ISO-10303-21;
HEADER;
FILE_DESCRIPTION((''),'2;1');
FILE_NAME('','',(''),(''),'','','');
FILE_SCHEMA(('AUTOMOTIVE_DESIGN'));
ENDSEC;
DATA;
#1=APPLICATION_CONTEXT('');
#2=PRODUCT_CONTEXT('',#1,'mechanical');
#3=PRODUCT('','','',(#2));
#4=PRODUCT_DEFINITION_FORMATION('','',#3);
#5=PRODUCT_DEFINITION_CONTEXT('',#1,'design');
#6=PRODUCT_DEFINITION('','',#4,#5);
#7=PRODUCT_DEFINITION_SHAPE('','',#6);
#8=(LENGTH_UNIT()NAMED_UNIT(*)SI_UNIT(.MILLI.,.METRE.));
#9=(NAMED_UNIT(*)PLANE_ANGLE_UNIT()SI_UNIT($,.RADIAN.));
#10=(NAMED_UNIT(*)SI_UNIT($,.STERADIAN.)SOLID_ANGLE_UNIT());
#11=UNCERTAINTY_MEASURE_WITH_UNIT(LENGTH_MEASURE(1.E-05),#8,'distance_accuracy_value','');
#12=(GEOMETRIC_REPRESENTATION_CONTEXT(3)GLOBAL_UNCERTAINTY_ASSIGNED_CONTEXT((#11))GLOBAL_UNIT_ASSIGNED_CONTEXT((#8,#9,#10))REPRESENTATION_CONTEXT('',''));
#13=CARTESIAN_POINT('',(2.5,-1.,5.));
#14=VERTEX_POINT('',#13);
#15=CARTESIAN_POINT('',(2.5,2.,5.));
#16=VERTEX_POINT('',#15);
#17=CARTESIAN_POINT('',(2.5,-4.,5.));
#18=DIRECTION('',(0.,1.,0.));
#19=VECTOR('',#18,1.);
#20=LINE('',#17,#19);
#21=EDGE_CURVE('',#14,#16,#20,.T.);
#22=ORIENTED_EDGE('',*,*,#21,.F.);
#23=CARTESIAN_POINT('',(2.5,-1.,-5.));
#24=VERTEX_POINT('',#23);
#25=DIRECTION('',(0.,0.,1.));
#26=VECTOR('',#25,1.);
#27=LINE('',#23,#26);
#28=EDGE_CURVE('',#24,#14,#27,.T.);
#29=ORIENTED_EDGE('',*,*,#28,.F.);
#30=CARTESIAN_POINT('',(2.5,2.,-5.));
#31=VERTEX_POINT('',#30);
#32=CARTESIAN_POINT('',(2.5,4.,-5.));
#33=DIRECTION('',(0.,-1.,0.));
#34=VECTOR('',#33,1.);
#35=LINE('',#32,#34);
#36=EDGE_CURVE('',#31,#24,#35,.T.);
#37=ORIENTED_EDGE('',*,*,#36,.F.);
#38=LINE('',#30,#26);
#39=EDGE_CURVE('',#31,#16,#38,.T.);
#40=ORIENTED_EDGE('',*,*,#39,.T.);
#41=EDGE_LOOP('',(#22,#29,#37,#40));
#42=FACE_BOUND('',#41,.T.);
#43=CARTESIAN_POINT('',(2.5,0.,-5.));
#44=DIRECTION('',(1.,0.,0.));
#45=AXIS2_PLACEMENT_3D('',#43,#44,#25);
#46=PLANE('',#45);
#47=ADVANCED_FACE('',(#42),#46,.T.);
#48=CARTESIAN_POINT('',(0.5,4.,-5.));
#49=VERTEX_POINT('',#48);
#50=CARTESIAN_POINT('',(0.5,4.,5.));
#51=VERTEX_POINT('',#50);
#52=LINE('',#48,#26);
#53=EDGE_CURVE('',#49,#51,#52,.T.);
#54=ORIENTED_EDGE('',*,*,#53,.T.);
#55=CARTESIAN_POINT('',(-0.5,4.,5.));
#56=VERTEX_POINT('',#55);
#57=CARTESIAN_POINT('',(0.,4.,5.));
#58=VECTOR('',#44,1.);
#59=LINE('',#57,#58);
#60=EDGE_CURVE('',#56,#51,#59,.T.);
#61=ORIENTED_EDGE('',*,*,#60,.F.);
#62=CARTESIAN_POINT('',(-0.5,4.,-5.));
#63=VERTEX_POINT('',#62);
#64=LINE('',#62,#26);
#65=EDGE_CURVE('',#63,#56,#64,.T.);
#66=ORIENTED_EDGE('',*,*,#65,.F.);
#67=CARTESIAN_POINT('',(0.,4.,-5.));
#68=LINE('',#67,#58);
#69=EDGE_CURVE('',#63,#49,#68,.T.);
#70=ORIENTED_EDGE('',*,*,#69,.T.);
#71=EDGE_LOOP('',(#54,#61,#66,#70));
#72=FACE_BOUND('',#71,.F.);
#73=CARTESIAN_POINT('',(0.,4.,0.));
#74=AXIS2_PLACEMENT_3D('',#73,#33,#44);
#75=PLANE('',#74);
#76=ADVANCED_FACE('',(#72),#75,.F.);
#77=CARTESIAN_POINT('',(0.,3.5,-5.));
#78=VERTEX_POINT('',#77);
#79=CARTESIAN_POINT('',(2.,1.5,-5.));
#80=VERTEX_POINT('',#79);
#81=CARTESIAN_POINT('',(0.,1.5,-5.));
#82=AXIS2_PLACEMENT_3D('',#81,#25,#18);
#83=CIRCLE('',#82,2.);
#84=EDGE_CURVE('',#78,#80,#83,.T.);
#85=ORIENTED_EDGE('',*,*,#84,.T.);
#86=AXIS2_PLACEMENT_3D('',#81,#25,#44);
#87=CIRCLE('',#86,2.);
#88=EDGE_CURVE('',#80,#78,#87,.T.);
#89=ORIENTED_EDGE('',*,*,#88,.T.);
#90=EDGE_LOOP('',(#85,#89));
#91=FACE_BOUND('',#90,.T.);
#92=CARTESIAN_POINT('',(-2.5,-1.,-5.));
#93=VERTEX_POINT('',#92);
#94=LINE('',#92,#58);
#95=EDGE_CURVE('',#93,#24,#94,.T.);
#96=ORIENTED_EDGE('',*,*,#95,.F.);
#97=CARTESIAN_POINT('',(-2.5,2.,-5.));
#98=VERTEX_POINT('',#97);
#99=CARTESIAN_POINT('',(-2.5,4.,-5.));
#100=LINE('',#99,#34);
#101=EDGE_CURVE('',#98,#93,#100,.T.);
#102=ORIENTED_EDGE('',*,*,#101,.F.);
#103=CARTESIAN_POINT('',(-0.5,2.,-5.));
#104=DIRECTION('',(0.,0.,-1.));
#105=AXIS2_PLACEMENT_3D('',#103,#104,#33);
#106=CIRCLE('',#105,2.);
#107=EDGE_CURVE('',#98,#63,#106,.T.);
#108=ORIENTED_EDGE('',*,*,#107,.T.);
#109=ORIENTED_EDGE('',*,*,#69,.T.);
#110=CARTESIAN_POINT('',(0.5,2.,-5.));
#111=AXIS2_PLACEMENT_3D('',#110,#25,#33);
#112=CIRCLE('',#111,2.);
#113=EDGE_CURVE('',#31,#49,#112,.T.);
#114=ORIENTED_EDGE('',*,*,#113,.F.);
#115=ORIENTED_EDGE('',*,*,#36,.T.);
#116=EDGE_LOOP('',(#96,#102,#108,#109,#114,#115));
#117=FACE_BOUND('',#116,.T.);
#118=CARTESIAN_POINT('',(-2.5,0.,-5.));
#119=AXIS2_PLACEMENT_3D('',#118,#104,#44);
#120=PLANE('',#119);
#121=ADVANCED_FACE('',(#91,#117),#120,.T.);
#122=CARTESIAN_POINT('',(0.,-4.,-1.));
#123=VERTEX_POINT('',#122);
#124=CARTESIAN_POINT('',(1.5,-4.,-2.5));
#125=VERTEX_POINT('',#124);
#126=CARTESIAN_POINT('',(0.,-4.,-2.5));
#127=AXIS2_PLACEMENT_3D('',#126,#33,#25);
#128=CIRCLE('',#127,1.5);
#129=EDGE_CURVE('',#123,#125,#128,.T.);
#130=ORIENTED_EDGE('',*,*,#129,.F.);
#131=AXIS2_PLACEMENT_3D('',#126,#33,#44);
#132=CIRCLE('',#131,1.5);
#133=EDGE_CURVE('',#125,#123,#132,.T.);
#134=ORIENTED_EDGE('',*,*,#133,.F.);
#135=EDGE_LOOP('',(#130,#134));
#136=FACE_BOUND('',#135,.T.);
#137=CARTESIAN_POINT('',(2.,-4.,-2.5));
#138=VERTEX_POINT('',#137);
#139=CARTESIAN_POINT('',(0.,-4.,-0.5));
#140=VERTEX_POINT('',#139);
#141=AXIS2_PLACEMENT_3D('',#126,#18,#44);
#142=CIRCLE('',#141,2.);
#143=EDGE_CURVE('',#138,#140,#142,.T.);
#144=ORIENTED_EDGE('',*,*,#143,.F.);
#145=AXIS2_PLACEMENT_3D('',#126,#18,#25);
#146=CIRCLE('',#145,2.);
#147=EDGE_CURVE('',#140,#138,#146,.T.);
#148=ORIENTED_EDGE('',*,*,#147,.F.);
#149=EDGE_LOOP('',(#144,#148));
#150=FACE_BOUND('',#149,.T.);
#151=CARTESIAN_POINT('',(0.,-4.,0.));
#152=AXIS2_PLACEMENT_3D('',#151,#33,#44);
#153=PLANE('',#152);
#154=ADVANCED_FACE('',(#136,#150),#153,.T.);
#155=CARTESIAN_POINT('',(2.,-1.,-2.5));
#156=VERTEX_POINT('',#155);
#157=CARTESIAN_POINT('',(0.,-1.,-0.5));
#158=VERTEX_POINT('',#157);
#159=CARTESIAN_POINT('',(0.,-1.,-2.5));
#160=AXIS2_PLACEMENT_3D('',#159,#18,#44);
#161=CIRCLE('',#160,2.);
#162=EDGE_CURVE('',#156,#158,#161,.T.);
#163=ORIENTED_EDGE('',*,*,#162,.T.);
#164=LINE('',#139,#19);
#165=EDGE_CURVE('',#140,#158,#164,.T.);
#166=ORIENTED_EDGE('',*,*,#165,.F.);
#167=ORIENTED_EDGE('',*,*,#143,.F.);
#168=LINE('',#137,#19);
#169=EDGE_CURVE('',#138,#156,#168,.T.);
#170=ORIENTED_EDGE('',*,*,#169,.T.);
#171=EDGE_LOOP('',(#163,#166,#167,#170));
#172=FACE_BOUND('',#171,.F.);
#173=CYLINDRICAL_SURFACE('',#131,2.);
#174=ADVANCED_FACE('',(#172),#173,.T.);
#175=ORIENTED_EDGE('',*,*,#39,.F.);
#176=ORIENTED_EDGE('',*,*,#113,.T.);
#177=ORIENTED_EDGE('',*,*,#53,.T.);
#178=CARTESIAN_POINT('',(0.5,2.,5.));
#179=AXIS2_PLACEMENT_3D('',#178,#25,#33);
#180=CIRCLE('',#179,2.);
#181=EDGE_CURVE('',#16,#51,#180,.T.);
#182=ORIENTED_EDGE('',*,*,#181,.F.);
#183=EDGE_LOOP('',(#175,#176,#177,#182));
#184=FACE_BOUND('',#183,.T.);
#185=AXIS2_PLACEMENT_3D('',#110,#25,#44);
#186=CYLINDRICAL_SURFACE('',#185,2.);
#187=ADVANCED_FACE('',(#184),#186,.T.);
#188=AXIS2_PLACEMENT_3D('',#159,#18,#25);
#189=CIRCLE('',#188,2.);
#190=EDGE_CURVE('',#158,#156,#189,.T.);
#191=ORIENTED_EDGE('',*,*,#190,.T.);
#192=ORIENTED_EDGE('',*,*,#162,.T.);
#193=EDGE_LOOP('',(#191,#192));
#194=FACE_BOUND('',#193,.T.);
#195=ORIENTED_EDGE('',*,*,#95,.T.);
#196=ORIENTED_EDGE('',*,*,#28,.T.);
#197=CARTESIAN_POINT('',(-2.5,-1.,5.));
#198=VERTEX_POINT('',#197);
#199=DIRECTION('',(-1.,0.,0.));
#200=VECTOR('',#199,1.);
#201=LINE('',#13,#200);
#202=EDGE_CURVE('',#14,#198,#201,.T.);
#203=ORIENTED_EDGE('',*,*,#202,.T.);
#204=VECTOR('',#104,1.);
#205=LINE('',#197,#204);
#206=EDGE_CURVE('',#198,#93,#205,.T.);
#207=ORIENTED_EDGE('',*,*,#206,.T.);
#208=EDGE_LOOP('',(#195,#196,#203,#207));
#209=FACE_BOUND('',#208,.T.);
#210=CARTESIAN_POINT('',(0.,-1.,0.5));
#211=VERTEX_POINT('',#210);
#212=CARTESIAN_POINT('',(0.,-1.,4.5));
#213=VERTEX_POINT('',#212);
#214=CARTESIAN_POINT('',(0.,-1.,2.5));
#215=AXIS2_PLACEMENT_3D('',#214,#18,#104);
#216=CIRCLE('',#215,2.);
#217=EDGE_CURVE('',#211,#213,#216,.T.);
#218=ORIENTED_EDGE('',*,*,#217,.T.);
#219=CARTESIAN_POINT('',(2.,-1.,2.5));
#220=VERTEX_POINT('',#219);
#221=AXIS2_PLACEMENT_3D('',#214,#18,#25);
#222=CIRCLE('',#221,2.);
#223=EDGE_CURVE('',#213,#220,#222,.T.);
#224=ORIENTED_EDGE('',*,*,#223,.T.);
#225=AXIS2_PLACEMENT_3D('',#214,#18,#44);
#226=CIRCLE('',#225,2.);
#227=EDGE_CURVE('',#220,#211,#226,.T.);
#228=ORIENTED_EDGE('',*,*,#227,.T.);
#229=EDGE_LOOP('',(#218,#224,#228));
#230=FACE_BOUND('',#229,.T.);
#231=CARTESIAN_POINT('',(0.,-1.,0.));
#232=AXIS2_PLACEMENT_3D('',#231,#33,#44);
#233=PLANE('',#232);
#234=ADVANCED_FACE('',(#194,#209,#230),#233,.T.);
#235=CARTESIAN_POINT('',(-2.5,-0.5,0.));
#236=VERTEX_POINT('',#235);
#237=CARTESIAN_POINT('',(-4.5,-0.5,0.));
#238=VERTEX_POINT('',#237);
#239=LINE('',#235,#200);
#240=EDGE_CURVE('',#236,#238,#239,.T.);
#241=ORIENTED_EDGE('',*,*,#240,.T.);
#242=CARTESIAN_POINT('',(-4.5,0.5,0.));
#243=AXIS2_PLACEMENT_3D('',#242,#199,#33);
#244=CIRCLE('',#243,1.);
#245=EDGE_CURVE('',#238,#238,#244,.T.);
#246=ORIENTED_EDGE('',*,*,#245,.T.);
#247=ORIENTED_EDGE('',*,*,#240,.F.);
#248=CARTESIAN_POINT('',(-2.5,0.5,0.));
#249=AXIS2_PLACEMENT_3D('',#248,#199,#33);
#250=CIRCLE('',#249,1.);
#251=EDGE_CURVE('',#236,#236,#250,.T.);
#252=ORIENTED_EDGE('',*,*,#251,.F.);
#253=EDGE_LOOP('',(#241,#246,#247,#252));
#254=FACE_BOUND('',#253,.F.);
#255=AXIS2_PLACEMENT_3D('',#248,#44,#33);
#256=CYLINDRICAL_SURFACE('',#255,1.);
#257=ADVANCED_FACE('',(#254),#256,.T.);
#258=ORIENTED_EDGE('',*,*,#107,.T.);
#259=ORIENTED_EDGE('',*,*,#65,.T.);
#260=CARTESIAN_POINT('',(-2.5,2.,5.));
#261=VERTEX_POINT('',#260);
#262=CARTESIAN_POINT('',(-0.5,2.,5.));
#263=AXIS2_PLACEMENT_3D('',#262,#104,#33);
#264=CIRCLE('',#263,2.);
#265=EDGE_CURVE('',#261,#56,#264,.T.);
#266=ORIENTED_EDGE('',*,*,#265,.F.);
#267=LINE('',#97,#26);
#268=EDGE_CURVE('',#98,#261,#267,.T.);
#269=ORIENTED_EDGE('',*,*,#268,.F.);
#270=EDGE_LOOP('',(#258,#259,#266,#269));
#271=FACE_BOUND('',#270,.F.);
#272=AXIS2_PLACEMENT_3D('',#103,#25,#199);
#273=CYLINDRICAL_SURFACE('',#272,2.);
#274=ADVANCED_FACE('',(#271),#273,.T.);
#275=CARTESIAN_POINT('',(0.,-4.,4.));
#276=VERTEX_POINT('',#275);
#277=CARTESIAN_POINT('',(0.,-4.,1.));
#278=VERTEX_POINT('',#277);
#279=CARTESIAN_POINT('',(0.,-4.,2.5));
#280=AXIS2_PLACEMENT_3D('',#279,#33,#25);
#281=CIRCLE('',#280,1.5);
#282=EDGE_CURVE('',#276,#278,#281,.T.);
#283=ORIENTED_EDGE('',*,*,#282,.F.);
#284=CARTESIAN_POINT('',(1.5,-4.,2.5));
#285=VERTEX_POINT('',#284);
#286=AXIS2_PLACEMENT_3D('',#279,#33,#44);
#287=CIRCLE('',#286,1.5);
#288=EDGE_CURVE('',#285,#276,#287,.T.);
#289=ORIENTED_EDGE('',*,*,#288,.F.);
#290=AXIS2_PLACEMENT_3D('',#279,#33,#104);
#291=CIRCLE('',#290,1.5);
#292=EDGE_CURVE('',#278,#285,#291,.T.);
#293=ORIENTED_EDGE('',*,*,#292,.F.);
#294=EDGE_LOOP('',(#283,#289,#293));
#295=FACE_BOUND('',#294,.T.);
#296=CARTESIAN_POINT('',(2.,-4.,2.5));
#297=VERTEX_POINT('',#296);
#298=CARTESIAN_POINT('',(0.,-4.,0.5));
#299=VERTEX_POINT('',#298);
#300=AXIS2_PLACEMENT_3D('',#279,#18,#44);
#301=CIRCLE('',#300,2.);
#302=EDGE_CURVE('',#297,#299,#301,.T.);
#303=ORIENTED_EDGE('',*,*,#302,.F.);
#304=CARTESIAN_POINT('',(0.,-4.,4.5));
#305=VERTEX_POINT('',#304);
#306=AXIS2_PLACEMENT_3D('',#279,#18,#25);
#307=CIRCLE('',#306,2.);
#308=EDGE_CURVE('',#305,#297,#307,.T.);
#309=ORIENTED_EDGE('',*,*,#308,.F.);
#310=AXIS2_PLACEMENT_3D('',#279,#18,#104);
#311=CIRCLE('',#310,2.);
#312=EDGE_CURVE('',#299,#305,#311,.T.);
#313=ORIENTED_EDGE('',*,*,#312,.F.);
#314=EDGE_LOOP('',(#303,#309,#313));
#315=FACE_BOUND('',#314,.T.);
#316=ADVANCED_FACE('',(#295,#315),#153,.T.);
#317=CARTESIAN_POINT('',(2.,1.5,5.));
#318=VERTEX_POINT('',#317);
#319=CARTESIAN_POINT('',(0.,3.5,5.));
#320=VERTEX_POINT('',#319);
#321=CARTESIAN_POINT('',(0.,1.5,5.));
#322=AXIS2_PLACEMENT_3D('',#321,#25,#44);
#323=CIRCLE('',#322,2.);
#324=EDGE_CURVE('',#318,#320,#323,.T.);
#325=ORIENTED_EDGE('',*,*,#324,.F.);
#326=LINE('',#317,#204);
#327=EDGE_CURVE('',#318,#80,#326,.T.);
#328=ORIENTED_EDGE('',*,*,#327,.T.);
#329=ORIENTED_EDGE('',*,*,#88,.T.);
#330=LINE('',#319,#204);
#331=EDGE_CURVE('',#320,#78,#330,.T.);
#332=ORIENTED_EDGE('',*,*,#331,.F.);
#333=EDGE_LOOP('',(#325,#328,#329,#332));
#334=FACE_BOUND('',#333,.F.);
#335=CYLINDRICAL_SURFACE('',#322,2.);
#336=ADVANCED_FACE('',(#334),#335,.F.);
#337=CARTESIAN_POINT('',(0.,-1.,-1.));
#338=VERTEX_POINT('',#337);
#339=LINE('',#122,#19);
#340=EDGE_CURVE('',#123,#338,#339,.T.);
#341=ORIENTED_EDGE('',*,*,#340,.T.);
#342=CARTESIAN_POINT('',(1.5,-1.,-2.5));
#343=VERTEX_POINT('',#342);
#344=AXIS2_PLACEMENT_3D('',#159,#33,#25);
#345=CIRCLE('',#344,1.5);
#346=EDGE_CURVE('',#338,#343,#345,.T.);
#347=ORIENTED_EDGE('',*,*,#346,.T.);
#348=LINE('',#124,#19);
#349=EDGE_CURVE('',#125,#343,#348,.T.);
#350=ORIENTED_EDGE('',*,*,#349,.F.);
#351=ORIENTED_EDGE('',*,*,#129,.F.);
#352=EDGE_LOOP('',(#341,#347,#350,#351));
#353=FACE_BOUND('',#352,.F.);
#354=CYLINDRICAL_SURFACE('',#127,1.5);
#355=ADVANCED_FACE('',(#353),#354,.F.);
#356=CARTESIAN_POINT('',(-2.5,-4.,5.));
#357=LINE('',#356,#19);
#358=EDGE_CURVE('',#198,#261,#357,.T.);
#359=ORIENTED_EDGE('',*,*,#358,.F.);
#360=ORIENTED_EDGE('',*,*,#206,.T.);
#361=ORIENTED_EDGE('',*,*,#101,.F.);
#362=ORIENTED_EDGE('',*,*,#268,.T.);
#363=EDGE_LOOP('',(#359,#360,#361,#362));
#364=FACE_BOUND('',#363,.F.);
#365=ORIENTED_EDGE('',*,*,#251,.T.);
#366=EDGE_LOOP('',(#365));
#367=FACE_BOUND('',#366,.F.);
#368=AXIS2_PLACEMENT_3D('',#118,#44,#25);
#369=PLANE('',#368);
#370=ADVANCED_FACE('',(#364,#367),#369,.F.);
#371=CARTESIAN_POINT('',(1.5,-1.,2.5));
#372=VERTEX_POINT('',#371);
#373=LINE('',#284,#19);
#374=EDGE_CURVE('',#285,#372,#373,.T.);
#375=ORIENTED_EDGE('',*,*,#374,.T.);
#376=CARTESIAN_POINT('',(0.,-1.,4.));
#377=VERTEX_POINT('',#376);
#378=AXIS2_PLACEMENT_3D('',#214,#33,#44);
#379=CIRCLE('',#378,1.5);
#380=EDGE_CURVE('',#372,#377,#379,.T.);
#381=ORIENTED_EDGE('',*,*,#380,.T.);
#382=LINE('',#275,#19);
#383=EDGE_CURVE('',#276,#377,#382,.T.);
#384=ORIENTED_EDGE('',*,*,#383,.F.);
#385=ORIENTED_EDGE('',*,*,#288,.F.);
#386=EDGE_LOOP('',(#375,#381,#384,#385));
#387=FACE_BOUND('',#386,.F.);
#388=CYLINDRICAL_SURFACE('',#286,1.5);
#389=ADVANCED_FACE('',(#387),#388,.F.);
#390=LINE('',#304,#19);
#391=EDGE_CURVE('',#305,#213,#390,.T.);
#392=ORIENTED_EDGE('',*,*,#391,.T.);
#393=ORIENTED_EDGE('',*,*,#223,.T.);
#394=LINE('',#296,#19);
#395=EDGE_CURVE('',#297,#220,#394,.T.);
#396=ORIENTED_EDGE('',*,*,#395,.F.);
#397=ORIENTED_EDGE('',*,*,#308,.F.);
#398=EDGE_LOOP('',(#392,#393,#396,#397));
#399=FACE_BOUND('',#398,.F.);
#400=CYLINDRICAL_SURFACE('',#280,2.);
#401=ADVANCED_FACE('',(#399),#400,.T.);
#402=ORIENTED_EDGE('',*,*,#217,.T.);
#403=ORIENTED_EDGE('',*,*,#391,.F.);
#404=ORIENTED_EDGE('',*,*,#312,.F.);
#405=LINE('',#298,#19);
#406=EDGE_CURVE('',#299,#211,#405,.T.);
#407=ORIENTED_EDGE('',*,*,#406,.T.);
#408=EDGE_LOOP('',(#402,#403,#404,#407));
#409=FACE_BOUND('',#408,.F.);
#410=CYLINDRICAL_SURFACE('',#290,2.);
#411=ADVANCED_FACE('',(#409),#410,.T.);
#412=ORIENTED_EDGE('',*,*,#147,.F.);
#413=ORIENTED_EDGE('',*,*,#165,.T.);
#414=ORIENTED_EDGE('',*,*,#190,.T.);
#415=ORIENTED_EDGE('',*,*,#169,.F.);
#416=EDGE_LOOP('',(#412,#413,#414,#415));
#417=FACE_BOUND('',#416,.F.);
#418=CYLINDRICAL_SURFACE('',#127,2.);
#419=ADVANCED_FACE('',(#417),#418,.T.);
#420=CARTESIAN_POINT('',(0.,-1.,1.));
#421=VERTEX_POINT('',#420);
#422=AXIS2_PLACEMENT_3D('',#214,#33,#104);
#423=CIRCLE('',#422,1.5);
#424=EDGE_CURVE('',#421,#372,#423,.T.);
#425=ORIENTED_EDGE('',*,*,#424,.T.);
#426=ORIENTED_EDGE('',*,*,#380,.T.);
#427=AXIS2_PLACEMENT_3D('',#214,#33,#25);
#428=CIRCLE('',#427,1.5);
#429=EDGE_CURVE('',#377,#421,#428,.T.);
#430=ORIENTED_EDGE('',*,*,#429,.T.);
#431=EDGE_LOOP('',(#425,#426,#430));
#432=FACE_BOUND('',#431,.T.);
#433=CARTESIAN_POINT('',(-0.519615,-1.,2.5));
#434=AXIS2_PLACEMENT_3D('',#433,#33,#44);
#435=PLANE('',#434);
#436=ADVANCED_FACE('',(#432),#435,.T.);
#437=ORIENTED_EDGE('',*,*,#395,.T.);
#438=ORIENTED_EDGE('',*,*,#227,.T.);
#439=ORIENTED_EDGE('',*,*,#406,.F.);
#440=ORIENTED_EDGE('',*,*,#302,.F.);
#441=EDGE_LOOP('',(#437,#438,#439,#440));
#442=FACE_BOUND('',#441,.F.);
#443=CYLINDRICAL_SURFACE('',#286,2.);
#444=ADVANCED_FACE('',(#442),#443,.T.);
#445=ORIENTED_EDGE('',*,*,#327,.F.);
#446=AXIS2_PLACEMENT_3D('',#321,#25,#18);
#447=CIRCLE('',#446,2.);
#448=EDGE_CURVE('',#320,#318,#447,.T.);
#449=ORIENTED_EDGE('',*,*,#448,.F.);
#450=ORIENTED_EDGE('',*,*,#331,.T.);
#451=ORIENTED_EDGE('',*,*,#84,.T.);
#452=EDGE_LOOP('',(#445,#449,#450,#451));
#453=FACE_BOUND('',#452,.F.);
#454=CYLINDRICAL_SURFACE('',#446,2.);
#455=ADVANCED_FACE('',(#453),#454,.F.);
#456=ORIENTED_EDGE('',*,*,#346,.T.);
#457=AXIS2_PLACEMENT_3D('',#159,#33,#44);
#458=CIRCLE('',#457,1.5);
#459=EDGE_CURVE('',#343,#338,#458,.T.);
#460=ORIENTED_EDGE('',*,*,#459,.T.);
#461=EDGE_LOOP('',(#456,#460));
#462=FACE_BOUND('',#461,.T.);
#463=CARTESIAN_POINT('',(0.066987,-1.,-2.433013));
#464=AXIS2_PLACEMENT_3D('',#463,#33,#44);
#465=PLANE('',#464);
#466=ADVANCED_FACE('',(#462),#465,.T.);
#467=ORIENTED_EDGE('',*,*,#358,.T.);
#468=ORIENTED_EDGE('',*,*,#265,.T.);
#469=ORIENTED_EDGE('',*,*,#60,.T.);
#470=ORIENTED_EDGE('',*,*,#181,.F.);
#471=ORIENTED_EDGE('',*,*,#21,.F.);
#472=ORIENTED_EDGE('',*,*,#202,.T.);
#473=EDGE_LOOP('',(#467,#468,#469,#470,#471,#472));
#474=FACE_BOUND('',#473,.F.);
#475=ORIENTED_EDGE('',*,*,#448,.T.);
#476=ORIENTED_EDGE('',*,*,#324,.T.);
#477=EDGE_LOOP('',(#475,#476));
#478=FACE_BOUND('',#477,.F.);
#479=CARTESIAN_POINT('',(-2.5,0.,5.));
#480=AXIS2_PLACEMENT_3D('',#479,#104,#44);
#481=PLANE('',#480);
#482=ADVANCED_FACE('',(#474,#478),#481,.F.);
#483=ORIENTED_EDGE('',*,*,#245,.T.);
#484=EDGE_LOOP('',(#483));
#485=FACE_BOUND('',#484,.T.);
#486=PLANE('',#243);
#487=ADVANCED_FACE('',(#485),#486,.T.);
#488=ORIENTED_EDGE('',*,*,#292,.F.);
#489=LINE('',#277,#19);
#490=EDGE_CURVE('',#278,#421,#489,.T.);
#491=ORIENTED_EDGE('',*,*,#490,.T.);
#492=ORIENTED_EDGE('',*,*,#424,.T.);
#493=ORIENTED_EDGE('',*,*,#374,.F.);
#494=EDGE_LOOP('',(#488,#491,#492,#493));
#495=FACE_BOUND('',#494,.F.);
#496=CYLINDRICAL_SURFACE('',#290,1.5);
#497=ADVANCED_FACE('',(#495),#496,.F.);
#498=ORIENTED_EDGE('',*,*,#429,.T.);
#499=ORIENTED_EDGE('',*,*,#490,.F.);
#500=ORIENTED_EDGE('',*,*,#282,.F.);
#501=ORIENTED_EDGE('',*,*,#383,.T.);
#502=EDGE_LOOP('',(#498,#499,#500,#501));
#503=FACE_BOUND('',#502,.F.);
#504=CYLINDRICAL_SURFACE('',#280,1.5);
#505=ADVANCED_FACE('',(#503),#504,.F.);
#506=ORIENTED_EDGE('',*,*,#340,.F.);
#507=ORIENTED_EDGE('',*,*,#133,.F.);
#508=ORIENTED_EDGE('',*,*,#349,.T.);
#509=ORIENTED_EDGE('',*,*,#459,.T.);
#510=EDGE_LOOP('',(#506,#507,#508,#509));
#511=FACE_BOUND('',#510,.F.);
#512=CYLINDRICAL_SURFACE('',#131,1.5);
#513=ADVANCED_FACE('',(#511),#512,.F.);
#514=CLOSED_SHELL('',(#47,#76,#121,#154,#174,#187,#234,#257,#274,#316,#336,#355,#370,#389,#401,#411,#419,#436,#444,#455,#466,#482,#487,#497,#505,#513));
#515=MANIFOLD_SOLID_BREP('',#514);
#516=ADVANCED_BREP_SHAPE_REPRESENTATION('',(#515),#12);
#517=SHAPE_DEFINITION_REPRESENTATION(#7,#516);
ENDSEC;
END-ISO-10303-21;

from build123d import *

# Parameters (mm, degrees)
F0_W      = 5
F0_H      = 10
F1_DEPTH  = 4
F2_W      = 2
F2_H      = 4
F3_DEPTH  = 25
F4_R      = 2
F7_DEPTH  = 3
F8_DEPTH  = 25
F9_R      = 1
F10_DEPTH = 2


# Not quite as in the source:
# - a feature names something its author has since deleted; it is built from what else it names


with BuildPart() as f1:
    # F0 (on Front) → F1 (new body, symmetric)
    with BuildSketch(Plane.XZ):
        Rectangle(F0_W, F0_H)
    extrude(amount=F1_DEPTH, both=True)

    # F2 (on face) → F3 (cut)
    with BuildSketch(Plane.XZ.offset(4)):
        with Locations((3.5, 3)):
            Rectangle(F2_W, F2_H)
        with Locations((10.5, 3)):
            Rectangle(F2_W, F2_H)
        with Locations((17.5, 3)):
            Rectangle(F2_W, F2_H)
        with Locations((17.5, -3)):
            Rectangle(F2_W, F2_H)
        with Locations((10.5, -3)):
            Rectangle(F2_W, F2_H)
        with Locations((3.5, -3)):
            Rectangle(F2_W, F2_H)
    extrude(amount=-F3_DEPTH, mode=Mode.SUBTRACT)

    # F4
    f4_edges = [f1.edges().sort_by_distance(p)[0] for p in [
        (-2.5, 4, 0),
        (2.5, 4, 0),
    ]]
    fillet(f4_edges, radius=F4_R)

    # F6 (on face) → F7 (cut)
    with BuildSketch(Plane.XZ.offset(4)):
        Polygon((2.5, 5), (0, 5), (-2.5, 5), (-2.5, -5), (2.5, -5), align=None)
        with BuildLine():
            ThreePointArc((2, -2.5), (-1.4142135624, -3.9142135624), (0, -0.5))
            ThreePointArc((0, -0.5), (1.4142135624, -1.0857864376), (2, -2.5))
        make_face(mode=Mode.SUBTRACT)
        with BuildLine():
            ThreePointArc((0, 0.5), (-2, 2.5), (0, 4.5))
            ThreePointArc((0, 4.5), (1.4142135624, 3.9142135624), (2, 2.5))
            ThreePointArc((2, 2.5), (1.4142135624, 1.0857864376), (0, 0.5))
        make_face(mode=Mode.SUBTRACT)
        with BuildLine():
            ThreePointArc((1.5, -2.5), (1.0606601718, -1.4393398282), (0, -1))
            ThreePointArc((0, -1), (-1.0606601718, -3.5606601718), (1.5, -2.5))
        make_face()
        with BuildLine():
            Line((0, 2.5), (0, 4))
            ThreePointArc((0, 4), (-1.5, 2.5), (0, 1))
            Line((0, 1), (0, 2.5))
        make_face()
        with BuildLine():
            ThreePointArc((1.5, 2.5), (1.0606601718, 3.5606601718), (0, 4))
            Line((0, 4), (0, 2.5))
            Line((0, 2.5), (0, 1))
            ThreePointArc((0, 1), (1.0606601718, 1.4393398282), (1.5, 2.5))
        make_face()
    extrude(amount=-F7_DEPTH, mode=Mode.SUBTRACT)

    # F5 (on face) → F8 (cut)
    with BuildSketch(Plane.XY.offset(5)):
        with BuildLine():
            ThreePointArc((2, 1.5), (1.4142135624, 2.9142135624), (0, 3.5))
            ThreePointArc((0, 3.5), (-1.4142135624, 0.0857864376), (2, 1.5))
        make_face()
    extrude(amount=-F8_DEPTH, mode=Mode.SUBTRACT)

    # F9 (on face) → F10 (join)
    with BuildSketch(Plane(origin=(-2.5, 0, 0), x_dir=(0, -1, 0), z_dir=(-1, 0, 0))):
        with Locations((-0.5, 0)):
            Circle(F9_R)
    extrude(amount=F10_DEPTH)


solid = f1.part
